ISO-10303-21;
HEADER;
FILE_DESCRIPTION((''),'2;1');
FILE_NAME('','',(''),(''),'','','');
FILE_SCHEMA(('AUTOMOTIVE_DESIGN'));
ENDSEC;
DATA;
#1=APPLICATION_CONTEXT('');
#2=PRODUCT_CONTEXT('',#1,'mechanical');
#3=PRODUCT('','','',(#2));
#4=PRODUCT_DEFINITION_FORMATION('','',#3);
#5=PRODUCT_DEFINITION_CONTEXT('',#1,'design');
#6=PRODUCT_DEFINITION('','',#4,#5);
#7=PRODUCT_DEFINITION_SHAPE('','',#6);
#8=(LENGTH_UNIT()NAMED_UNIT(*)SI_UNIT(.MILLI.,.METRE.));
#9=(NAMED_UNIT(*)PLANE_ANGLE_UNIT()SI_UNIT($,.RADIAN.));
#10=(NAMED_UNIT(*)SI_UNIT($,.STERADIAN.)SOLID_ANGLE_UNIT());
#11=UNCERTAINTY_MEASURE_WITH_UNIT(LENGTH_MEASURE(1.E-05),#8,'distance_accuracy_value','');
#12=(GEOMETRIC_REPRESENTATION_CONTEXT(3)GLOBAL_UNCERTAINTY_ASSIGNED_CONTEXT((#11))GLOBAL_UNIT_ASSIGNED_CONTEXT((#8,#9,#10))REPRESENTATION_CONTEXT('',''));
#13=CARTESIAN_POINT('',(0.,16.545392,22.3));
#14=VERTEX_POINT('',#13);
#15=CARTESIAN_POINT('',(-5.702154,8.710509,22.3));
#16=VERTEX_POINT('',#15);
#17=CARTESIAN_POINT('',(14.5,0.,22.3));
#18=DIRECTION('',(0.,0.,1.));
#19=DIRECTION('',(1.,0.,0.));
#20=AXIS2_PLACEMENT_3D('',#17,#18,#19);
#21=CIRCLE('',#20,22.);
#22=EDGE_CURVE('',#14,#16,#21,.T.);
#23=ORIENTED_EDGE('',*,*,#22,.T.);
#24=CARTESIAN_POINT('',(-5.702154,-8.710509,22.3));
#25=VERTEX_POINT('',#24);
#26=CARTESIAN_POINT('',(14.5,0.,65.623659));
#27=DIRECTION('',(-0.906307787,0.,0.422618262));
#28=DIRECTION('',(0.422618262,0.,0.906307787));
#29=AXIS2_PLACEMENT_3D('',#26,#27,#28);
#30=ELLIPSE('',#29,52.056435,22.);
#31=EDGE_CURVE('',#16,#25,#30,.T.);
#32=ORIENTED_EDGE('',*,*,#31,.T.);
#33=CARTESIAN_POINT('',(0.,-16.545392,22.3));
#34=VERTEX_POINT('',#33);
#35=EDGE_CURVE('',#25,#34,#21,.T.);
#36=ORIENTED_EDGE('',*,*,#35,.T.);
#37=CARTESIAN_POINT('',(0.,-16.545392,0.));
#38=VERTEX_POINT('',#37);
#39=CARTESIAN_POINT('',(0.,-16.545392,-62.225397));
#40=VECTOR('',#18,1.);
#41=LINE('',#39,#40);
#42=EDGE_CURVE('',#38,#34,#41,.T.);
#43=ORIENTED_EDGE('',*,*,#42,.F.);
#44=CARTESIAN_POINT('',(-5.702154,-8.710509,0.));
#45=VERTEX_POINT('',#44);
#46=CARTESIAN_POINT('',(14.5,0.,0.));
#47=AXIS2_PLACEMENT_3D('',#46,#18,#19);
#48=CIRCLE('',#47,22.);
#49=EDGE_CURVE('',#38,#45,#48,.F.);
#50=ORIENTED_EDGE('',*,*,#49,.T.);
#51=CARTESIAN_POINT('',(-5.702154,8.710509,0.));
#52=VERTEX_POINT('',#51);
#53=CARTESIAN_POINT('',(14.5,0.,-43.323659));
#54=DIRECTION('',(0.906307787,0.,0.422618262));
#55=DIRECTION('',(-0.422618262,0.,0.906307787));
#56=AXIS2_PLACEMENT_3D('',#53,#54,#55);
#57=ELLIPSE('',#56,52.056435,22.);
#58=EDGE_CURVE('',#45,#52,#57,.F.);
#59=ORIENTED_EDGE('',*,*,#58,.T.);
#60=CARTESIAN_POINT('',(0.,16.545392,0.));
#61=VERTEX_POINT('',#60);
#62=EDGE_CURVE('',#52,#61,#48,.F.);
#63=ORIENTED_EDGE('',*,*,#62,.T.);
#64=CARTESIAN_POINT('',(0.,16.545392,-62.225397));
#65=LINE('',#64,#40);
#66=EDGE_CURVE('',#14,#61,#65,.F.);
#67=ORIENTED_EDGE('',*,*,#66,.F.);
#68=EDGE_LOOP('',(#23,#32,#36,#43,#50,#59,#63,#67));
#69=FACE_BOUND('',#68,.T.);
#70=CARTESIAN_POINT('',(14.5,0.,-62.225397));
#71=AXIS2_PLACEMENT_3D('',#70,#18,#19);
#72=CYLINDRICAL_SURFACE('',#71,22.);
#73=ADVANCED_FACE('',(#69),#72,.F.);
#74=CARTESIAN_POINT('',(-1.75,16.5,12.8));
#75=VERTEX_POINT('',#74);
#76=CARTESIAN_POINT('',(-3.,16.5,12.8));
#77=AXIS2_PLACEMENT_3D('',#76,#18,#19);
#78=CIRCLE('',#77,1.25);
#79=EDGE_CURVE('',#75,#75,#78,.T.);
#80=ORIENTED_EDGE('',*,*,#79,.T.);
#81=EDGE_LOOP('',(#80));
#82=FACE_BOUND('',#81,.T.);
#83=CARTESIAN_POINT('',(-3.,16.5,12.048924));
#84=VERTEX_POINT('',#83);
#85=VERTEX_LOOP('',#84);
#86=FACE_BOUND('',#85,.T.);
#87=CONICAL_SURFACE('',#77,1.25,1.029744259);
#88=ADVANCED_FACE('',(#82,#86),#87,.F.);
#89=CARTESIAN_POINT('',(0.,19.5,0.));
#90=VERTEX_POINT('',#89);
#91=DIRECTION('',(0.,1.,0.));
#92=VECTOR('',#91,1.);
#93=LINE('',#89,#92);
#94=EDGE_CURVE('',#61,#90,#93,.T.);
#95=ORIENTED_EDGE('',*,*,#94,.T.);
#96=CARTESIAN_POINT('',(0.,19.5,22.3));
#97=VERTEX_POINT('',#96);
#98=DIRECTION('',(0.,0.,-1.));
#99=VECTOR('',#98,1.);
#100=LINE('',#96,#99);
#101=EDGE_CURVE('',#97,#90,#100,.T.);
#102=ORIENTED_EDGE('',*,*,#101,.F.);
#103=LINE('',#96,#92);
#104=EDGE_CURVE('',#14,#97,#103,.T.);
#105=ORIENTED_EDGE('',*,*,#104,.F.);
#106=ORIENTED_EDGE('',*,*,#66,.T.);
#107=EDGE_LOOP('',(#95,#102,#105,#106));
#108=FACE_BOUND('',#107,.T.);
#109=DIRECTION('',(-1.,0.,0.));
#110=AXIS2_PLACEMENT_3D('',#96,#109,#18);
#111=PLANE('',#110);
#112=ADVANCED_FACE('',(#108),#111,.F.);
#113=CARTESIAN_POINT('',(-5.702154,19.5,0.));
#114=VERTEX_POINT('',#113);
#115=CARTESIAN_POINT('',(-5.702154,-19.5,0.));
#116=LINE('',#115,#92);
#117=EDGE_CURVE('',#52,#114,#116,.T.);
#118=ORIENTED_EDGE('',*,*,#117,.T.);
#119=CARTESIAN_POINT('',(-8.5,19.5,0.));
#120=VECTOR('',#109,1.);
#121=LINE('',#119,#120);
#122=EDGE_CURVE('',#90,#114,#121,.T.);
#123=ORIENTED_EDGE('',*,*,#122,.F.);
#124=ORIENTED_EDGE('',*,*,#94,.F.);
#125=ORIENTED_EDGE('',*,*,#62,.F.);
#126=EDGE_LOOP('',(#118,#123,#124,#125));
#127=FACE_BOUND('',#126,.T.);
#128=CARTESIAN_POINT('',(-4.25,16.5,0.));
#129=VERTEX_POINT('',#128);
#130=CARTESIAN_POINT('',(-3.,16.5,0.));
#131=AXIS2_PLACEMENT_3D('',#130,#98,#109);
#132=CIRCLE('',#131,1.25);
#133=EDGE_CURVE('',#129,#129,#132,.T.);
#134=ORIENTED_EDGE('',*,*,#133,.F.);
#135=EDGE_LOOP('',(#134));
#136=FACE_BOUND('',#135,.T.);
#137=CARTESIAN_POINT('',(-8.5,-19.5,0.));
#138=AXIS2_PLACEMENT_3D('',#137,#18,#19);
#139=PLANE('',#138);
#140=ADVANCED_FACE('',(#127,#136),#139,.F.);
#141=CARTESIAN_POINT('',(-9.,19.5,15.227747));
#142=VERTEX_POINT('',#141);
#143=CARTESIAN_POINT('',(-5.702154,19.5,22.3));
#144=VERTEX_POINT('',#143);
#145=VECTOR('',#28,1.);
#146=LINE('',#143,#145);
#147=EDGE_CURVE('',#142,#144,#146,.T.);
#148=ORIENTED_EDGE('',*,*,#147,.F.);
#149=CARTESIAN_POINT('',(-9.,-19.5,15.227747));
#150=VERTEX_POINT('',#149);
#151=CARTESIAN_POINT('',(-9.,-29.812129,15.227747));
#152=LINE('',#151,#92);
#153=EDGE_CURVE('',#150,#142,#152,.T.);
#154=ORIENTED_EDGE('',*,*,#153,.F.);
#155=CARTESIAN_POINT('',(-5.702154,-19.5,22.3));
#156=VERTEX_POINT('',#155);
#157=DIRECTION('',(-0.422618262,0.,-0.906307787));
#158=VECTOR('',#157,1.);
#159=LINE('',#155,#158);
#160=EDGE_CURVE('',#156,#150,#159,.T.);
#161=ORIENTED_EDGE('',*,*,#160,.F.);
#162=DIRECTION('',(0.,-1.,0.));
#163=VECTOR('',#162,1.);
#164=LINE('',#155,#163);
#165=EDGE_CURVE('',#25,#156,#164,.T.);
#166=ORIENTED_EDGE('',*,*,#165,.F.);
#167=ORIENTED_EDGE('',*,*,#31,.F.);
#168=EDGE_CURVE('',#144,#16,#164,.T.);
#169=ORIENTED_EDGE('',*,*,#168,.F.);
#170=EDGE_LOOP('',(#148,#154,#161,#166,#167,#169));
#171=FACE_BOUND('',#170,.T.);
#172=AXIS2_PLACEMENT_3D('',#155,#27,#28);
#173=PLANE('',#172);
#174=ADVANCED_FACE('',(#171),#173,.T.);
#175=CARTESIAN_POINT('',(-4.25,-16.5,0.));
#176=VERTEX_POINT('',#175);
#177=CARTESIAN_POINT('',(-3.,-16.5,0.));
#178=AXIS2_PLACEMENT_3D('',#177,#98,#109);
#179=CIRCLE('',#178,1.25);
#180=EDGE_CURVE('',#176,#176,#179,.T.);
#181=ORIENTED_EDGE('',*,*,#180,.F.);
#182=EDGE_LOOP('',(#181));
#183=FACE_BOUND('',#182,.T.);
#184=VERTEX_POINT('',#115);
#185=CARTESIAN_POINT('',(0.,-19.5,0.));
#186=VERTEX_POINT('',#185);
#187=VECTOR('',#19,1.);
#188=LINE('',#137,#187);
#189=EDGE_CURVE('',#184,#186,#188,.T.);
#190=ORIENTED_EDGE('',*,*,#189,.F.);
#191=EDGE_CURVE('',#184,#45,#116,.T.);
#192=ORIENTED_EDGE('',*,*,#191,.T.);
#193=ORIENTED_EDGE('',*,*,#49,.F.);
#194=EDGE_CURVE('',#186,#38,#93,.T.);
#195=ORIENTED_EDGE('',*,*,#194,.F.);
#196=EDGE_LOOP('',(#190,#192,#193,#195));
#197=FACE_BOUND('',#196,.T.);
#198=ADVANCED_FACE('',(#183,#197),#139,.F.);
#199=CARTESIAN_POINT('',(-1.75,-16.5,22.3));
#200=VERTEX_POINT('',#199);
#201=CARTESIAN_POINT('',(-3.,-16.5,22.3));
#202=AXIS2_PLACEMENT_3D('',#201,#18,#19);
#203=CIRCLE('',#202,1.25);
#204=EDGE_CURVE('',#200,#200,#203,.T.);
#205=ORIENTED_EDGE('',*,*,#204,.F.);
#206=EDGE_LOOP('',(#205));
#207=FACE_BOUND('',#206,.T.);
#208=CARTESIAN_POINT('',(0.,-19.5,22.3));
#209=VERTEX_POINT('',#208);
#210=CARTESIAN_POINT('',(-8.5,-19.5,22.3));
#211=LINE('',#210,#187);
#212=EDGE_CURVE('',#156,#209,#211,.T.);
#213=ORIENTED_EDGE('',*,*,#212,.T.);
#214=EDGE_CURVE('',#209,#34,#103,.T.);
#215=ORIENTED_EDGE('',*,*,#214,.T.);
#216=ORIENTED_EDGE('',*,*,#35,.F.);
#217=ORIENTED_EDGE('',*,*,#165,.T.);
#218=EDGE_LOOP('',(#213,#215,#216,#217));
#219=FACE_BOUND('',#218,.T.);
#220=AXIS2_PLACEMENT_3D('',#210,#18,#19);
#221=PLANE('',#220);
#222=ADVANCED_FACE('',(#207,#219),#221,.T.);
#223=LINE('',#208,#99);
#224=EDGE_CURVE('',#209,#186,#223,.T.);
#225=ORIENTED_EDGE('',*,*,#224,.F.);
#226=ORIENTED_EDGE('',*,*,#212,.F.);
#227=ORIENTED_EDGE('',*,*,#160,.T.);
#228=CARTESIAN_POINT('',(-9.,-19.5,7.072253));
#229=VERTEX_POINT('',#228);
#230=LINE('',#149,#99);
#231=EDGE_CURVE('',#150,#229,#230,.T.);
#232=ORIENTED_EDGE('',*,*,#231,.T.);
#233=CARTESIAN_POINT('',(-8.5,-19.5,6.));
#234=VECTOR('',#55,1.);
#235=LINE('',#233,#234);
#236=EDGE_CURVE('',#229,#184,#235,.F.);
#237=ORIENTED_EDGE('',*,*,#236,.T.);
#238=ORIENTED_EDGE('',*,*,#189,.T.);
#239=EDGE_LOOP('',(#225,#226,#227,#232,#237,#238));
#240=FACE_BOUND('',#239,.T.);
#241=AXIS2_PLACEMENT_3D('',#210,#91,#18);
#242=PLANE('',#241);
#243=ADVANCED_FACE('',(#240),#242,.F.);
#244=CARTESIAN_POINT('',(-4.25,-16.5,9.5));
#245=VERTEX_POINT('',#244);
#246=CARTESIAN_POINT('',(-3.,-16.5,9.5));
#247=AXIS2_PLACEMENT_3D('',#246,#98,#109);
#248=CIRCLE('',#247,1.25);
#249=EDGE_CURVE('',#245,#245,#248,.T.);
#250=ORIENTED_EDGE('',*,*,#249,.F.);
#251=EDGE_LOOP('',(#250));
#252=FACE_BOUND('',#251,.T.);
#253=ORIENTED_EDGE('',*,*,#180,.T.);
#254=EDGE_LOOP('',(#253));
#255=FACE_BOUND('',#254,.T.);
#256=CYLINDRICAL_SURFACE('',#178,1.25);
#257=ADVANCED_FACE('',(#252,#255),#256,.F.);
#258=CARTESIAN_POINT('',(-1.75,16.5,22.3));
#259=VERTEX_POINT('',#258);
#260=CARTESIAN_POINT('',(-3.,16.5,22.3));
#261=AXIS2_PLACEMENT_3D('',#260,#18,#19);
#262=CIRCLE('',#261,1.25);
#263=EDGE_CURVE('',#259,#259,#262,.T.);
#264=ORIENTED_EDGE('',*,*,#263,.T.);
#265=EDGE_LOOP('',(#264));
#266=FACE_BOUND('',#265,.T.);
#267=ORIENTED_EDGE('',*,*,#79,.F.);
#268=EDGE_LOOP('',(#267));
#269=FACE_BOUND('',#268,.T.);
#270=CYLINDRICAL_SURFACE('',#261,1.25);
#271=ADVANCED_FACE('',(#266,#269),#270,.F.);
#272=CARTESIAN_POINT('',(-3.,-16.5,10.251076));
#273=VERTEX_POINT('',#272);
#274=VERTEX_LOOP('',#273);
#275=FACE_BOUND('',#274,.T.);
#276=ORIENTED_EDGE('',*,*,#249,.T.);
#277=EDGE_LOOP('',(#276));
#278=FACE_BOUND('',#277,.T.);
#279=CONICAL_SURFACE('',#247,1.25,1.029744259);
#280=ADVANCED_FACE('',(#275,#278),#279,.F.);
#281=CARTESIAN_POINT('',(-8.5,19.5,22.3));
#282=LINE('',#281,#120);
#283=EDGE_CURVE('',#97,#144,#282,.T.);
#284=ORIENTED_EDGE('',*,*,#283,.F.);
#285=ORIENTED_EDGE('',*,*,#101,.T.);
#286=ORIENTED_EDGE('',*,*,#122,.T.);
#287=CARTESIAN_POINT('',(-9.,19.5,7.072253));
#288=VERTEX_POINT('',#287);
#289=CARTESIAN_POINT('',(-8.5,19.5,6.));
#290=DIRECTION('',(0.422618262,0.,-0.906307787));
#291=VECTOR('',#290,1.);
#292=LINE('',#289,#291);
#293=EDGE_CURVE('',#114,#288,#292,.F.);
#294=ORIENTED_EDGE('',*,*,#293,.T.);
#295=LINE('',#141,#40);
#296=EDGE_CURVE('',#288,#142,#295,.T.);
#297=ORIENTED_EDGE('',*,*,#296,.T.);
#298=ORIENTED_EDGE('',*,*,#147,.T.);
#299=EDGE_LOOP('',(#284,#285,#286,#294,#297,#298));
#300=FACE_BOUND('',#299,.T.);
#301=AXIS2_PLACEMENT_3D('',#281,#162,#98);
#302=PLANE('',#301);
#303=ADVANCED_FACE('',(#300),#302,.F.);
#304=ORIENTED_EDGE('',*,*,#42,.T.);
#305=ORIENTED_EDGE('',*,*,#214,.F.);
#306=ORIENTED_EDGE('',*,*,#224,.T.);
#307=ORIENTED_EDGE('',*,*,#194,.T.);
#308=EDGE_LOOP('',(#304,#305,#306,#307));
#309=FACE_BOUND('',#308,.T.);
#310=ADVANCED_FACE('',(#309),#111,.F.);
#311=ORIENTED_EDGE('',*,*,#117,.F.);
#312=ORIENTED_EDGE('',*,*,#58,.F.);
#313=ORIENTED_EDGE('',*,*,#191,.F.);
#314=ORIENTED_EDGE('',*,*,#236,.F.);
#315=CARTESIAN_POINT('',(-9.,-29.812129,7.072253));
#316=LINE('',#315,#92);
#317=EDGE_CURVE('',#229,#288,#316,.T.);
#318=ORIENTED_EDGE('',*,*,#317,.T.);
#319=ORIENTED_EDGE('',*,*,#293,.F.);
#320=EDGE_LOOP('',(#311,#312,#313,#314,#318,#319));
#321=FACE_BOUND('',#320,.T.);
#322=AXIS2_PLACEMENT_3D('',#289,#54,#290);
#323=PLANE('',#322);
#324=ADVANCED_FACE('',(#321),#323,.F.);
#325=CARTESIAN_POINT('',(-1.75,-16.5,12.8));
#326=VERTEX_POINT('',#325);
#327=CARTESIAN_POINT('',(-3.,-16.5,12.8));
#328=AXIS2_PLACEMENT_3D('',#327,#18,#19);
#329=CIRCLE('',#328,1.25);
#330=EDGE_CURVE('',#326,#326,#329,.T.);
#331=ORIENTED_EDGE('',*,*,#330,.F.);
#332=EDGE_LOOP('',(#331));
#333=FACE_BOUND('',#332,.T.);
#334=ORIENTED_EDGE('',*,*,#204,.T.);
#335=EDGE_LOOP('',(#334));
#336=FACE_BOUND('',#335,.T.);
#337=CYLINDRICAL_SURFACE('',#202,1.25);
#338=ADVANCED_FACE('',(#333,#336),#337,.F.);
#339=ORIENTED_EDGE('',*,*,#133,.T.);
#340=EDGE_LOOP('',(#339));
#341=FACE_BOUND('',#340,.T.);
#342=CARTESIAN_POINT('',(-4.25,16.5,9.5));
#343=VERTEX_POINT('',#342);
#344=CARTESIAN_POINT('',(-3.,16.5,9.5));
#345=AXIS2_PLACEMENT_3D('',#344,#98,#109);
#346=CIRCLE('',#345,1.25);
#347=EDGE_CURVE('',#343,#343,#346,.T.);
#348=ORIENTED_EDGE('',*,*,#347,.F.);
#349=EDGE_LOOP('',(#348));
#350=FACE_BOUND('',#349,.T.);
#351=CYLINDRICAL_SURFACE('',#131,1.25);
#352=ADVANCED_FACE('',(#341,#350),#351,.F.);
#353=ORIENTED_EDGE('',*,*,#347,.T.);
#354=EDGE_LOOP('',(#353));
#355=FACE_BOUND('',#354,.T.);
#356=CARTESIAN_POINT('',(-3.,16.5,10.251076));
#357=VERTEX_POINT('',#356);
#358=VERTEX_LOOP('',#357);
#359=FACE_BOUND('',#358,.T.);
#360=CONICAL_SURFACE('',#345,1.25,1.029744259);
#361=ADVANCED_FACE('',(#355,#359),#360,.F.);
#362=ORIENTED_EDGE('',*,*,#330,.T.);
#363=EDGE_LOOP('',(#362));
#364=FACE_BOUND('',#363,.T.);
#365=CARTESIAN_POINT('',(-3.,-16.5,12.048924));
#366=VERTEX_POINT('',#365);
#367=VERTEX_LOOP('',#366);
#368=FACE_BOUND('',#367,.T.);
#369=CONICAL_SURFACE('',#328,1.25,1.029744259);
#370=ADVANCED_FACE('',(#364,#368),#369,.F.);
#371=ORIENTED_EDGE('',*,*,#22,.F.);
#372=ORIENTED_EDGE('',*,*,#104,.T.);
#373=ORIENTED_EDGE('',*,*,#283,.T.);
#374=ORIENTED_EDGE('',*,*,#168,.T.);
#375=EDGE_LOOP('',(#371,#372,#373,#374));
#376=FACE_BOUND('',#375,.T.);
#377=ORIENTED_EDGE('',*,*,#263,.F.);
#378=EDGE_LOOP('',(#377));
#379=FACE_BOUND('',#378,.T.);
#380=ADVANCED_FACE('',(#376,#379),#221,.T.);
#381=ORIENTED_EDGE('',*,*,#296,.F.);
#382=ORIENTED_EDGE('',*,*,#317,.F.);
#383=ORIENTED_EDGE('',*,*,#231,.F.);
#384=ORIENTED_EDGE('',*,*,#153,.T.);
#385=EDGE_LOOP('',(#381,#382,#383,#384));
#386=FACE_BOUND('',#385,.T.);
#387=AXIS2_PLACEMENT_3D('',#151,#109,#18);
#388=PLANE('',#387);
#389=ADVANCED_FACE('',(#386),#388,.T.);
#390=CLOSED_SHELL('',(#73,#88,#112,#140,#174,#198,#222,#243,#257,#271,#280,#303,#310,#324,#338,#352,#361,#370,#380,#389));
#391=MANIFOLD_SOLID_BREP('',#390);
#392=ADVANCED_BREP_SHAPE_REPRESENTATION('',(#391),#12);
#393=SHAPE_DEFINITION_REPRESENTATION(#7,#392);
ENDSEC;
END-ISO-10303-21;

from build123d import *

# Parameters (mm, degrees)
SKETCH_1_W                       = 8.5
SKETCH_1_H                       = 39
EXTRUDE_1_DEPTH                  = 22.3
SKETCH_2_R                       = 22
CUT_EXTRUDE_2_DEPTH              = 22.3
HOLE_WIZARD_M3_1_D               = 2.5
HOLE_WIZARD_M3_1_DEPTH           = 9.5
HOLE_WIZARD_M3_1_TIP             = 0.751075774
HOLE_WIZARD_M3_2_D               = 2.5
HOLE_WIZARD_M3_2_DEPTH           = 9.5
HOLE_WIZARD_M3_2_TIP             = 0.751075774
HOLE_WIZARD_M3_3_D               = 2.5
HOLE_WIZARD_M3_3_DEPTH           = 9.5
HOLE_WIZARD_M3_3_TIP             = 0.751075774
HOLE_WIZARD_M3_3_ON_FACE_2_D     = 2.5
HOLE_WIZARD_M3_3_ON_FACE_2_DEPTH = 9.5
HOLE_WIZARD_M3_3_ON_FACE_2_TIP   = 0.751075774
CHAMFER_2_SIZE                   = 6
CHAMFER_2_SIZE_2                 = 2.797845949
CHAMFER_5_SIZE                   = 2.797845949
CHAMFER_5_SIZE_2                 = 6
EXTRUDE_5_DEPTH                  = 39


with BuildPart() as part:
    # 草图1 → 拉伸1 (new body)
    with BuildSketch(Plane.XY):
        with Locations((-4.25, 0)):
            Rectangle(SKETCH_1_W, SKETCH_1_H)
    extrude(amount=EXTRUDE_1_DEPTH)

    # 草图2 → 拉伸2 (cut)
    with BuildSketch(Plane.XY.offset(22.3)):
        with Locations((14.5, 0)):
            Circle(SKETCH_2_R)
    extrude(amount=-CUT_EXTRUDE_2_DEPTH, mode=Mode.SUBTRACT)

    # M3 螺纹孔1
    with Locations(Plane(origin=(-3, 16.5, 22.3), x_dir=(1, 0, 0), z_dir=(0, 0, 1))):
        with Locations((0, 0)):
            Hole(HOLE_WIZARD_M3_1_D / 2, depth=HOLE_WIZARD_M3_1_DEPTH)
            with Locations((0, 0, -(HOLE_WIZARD_M3_1_DEPTH + HOLE_WIZARD_M3_1_TIP / 2))):  # 118° drill point
                Cone(0, HOLE_WIZARD_M3_1_D / 2, HOLE_WIZARD_M3_1_TIP, mode=Mode.SUBTRACT)

    # M3 螺纹孔2
    with Locations(Plane(origin=(-3, 16.5, 0), x_dir=(-1, 0, 0), z_dir=(0, 0, -1))):
        with Locations((0, 0)):
            Hole(HOLE_WIZARD_M3_2_D / 2, depth=HOLE_WIZARD_M3_2_DEPTH)
            with Locations((0, 0, -(HOLE_WIZARD_M3_2_DEPTH + HOLE_WIZARD_M3_2_TIP / 2))):  # 118° drill point
                Cone(0, HOLE_WIZARD_M3_2_D / 2, HOLE_WIZARD_M3_2_TIP, mode=Mode.SUBTRACT)

    # M3 螺纹孔3
    with Locations(Plane(origin=(-3, -16.5, 22.3), x_dir=(1, 0, 0), z_dir=(0, 0, 1))):
        with Locations((0, 0)):
            Hole(HOLE_WIZARD_M3_3_D / 2, depth=HOLE_WIZARD_M3_3_DEPTH)
            with Locations((0, 0, -(HOLE_WIZARD_M3_3_DEPTH + HOLE_WIZARD_M3_3_TIP / 2))):  # 118° drill point
                Cone(0, HOLE_WIZARD_M3_3_D / 2, HOLE_WIZARD_M3_3_TIP, mode=Mode.SUBTRACT)

    # M3 螺纹孔3 on face 2
    with Locations(Plane(origin=(-3, -16.5, 0), x_dir=(-1, 0, 0), z_dir=(0, 0, -1))):
        with Locations((0, 0)):
            Hole(HOLE_WIZARD_M3_3_ON_FACE_2_D / 2, depth=HOLE_WIZARD_M3_3_ON_FACE_2_DEPTH)
            with Locations((0, 0, -(HOLE_WIZARD_M3_3_ON_FACE_2_DEPTH + HOLE_WIZARD_M3_3_ON_FACE_2_TIP / 2))):  # 118° drill point
                Cone(0, HOLE_WIZARD_M3_3_ON_FACE_2_D / 2, HOLE_WIZARD_M3_3_ON_FACE_2_TIP, mode=Mode.SUBTRACT)

    # 倒角2
    # the kernel refuses this chamfer: 6, 2.797845949 mm, written as the material it takes off along each edge
    with BuildSketch(Plane(origin=(-8.5, -35.045852829, 22.3), x_dir=(-0.01631116413111048, 0, -0.9998669641130704), z_dir=(0, 1, 0))) as chamfer_2_piece_1:
        Polygon((CHAMFER_2_SIZE * 0.999866964113, -CHAMFER_2_SIZE * 0.0163111641311), (-CHAMFER_2_SIZE_2 * 0.0163111641307, -CHAMFER_2_SIZE_2 * 0.999866964088), (0, 0), align=None)
    extrude(amount=70.091705657, mode=Mode.SUBTRACT)

    # 倒角5
    # the kernel refuses this chamfer: 6, 2.797845949 mm, written as the material it takes off along each edge
    with BuildSketch(Plane(origin=(-8.5, -35.045852829, 0), x_dir=(0.9971975577536775, 0, -0.07481330637059953), z_dir=(0, 1, 0))) as chamfer_5_piece_1:
        Polygon((CHAMFER_5_SIZE * 0.997197557729, -CHAMFER_5_SIZE * 0.0748133063687), (-CHAMFER_5_SIZE_2 * 0.0748133063706, -CHAMFER_5_SIZE_2 * 0.997197557754), (0, 0), align=None)
    extrude(amount=70.091705657, mode=Mode.SUBTRACT)

    # 草图8 → 拉伸5 (add)
    with BuildSketch(Plane(origin=(0, 19.5, 0), x_dir=(1, 0, 0), z_dir=(0, 1, 0))):
        Polygon((-8.5, -16.3), (-8.5, -6), (-9, -7.07225346), (-9, -15.22774654), align=None)
    extrude(amount=-EXTRUDE_5_DEPTH)


solid = part.part
